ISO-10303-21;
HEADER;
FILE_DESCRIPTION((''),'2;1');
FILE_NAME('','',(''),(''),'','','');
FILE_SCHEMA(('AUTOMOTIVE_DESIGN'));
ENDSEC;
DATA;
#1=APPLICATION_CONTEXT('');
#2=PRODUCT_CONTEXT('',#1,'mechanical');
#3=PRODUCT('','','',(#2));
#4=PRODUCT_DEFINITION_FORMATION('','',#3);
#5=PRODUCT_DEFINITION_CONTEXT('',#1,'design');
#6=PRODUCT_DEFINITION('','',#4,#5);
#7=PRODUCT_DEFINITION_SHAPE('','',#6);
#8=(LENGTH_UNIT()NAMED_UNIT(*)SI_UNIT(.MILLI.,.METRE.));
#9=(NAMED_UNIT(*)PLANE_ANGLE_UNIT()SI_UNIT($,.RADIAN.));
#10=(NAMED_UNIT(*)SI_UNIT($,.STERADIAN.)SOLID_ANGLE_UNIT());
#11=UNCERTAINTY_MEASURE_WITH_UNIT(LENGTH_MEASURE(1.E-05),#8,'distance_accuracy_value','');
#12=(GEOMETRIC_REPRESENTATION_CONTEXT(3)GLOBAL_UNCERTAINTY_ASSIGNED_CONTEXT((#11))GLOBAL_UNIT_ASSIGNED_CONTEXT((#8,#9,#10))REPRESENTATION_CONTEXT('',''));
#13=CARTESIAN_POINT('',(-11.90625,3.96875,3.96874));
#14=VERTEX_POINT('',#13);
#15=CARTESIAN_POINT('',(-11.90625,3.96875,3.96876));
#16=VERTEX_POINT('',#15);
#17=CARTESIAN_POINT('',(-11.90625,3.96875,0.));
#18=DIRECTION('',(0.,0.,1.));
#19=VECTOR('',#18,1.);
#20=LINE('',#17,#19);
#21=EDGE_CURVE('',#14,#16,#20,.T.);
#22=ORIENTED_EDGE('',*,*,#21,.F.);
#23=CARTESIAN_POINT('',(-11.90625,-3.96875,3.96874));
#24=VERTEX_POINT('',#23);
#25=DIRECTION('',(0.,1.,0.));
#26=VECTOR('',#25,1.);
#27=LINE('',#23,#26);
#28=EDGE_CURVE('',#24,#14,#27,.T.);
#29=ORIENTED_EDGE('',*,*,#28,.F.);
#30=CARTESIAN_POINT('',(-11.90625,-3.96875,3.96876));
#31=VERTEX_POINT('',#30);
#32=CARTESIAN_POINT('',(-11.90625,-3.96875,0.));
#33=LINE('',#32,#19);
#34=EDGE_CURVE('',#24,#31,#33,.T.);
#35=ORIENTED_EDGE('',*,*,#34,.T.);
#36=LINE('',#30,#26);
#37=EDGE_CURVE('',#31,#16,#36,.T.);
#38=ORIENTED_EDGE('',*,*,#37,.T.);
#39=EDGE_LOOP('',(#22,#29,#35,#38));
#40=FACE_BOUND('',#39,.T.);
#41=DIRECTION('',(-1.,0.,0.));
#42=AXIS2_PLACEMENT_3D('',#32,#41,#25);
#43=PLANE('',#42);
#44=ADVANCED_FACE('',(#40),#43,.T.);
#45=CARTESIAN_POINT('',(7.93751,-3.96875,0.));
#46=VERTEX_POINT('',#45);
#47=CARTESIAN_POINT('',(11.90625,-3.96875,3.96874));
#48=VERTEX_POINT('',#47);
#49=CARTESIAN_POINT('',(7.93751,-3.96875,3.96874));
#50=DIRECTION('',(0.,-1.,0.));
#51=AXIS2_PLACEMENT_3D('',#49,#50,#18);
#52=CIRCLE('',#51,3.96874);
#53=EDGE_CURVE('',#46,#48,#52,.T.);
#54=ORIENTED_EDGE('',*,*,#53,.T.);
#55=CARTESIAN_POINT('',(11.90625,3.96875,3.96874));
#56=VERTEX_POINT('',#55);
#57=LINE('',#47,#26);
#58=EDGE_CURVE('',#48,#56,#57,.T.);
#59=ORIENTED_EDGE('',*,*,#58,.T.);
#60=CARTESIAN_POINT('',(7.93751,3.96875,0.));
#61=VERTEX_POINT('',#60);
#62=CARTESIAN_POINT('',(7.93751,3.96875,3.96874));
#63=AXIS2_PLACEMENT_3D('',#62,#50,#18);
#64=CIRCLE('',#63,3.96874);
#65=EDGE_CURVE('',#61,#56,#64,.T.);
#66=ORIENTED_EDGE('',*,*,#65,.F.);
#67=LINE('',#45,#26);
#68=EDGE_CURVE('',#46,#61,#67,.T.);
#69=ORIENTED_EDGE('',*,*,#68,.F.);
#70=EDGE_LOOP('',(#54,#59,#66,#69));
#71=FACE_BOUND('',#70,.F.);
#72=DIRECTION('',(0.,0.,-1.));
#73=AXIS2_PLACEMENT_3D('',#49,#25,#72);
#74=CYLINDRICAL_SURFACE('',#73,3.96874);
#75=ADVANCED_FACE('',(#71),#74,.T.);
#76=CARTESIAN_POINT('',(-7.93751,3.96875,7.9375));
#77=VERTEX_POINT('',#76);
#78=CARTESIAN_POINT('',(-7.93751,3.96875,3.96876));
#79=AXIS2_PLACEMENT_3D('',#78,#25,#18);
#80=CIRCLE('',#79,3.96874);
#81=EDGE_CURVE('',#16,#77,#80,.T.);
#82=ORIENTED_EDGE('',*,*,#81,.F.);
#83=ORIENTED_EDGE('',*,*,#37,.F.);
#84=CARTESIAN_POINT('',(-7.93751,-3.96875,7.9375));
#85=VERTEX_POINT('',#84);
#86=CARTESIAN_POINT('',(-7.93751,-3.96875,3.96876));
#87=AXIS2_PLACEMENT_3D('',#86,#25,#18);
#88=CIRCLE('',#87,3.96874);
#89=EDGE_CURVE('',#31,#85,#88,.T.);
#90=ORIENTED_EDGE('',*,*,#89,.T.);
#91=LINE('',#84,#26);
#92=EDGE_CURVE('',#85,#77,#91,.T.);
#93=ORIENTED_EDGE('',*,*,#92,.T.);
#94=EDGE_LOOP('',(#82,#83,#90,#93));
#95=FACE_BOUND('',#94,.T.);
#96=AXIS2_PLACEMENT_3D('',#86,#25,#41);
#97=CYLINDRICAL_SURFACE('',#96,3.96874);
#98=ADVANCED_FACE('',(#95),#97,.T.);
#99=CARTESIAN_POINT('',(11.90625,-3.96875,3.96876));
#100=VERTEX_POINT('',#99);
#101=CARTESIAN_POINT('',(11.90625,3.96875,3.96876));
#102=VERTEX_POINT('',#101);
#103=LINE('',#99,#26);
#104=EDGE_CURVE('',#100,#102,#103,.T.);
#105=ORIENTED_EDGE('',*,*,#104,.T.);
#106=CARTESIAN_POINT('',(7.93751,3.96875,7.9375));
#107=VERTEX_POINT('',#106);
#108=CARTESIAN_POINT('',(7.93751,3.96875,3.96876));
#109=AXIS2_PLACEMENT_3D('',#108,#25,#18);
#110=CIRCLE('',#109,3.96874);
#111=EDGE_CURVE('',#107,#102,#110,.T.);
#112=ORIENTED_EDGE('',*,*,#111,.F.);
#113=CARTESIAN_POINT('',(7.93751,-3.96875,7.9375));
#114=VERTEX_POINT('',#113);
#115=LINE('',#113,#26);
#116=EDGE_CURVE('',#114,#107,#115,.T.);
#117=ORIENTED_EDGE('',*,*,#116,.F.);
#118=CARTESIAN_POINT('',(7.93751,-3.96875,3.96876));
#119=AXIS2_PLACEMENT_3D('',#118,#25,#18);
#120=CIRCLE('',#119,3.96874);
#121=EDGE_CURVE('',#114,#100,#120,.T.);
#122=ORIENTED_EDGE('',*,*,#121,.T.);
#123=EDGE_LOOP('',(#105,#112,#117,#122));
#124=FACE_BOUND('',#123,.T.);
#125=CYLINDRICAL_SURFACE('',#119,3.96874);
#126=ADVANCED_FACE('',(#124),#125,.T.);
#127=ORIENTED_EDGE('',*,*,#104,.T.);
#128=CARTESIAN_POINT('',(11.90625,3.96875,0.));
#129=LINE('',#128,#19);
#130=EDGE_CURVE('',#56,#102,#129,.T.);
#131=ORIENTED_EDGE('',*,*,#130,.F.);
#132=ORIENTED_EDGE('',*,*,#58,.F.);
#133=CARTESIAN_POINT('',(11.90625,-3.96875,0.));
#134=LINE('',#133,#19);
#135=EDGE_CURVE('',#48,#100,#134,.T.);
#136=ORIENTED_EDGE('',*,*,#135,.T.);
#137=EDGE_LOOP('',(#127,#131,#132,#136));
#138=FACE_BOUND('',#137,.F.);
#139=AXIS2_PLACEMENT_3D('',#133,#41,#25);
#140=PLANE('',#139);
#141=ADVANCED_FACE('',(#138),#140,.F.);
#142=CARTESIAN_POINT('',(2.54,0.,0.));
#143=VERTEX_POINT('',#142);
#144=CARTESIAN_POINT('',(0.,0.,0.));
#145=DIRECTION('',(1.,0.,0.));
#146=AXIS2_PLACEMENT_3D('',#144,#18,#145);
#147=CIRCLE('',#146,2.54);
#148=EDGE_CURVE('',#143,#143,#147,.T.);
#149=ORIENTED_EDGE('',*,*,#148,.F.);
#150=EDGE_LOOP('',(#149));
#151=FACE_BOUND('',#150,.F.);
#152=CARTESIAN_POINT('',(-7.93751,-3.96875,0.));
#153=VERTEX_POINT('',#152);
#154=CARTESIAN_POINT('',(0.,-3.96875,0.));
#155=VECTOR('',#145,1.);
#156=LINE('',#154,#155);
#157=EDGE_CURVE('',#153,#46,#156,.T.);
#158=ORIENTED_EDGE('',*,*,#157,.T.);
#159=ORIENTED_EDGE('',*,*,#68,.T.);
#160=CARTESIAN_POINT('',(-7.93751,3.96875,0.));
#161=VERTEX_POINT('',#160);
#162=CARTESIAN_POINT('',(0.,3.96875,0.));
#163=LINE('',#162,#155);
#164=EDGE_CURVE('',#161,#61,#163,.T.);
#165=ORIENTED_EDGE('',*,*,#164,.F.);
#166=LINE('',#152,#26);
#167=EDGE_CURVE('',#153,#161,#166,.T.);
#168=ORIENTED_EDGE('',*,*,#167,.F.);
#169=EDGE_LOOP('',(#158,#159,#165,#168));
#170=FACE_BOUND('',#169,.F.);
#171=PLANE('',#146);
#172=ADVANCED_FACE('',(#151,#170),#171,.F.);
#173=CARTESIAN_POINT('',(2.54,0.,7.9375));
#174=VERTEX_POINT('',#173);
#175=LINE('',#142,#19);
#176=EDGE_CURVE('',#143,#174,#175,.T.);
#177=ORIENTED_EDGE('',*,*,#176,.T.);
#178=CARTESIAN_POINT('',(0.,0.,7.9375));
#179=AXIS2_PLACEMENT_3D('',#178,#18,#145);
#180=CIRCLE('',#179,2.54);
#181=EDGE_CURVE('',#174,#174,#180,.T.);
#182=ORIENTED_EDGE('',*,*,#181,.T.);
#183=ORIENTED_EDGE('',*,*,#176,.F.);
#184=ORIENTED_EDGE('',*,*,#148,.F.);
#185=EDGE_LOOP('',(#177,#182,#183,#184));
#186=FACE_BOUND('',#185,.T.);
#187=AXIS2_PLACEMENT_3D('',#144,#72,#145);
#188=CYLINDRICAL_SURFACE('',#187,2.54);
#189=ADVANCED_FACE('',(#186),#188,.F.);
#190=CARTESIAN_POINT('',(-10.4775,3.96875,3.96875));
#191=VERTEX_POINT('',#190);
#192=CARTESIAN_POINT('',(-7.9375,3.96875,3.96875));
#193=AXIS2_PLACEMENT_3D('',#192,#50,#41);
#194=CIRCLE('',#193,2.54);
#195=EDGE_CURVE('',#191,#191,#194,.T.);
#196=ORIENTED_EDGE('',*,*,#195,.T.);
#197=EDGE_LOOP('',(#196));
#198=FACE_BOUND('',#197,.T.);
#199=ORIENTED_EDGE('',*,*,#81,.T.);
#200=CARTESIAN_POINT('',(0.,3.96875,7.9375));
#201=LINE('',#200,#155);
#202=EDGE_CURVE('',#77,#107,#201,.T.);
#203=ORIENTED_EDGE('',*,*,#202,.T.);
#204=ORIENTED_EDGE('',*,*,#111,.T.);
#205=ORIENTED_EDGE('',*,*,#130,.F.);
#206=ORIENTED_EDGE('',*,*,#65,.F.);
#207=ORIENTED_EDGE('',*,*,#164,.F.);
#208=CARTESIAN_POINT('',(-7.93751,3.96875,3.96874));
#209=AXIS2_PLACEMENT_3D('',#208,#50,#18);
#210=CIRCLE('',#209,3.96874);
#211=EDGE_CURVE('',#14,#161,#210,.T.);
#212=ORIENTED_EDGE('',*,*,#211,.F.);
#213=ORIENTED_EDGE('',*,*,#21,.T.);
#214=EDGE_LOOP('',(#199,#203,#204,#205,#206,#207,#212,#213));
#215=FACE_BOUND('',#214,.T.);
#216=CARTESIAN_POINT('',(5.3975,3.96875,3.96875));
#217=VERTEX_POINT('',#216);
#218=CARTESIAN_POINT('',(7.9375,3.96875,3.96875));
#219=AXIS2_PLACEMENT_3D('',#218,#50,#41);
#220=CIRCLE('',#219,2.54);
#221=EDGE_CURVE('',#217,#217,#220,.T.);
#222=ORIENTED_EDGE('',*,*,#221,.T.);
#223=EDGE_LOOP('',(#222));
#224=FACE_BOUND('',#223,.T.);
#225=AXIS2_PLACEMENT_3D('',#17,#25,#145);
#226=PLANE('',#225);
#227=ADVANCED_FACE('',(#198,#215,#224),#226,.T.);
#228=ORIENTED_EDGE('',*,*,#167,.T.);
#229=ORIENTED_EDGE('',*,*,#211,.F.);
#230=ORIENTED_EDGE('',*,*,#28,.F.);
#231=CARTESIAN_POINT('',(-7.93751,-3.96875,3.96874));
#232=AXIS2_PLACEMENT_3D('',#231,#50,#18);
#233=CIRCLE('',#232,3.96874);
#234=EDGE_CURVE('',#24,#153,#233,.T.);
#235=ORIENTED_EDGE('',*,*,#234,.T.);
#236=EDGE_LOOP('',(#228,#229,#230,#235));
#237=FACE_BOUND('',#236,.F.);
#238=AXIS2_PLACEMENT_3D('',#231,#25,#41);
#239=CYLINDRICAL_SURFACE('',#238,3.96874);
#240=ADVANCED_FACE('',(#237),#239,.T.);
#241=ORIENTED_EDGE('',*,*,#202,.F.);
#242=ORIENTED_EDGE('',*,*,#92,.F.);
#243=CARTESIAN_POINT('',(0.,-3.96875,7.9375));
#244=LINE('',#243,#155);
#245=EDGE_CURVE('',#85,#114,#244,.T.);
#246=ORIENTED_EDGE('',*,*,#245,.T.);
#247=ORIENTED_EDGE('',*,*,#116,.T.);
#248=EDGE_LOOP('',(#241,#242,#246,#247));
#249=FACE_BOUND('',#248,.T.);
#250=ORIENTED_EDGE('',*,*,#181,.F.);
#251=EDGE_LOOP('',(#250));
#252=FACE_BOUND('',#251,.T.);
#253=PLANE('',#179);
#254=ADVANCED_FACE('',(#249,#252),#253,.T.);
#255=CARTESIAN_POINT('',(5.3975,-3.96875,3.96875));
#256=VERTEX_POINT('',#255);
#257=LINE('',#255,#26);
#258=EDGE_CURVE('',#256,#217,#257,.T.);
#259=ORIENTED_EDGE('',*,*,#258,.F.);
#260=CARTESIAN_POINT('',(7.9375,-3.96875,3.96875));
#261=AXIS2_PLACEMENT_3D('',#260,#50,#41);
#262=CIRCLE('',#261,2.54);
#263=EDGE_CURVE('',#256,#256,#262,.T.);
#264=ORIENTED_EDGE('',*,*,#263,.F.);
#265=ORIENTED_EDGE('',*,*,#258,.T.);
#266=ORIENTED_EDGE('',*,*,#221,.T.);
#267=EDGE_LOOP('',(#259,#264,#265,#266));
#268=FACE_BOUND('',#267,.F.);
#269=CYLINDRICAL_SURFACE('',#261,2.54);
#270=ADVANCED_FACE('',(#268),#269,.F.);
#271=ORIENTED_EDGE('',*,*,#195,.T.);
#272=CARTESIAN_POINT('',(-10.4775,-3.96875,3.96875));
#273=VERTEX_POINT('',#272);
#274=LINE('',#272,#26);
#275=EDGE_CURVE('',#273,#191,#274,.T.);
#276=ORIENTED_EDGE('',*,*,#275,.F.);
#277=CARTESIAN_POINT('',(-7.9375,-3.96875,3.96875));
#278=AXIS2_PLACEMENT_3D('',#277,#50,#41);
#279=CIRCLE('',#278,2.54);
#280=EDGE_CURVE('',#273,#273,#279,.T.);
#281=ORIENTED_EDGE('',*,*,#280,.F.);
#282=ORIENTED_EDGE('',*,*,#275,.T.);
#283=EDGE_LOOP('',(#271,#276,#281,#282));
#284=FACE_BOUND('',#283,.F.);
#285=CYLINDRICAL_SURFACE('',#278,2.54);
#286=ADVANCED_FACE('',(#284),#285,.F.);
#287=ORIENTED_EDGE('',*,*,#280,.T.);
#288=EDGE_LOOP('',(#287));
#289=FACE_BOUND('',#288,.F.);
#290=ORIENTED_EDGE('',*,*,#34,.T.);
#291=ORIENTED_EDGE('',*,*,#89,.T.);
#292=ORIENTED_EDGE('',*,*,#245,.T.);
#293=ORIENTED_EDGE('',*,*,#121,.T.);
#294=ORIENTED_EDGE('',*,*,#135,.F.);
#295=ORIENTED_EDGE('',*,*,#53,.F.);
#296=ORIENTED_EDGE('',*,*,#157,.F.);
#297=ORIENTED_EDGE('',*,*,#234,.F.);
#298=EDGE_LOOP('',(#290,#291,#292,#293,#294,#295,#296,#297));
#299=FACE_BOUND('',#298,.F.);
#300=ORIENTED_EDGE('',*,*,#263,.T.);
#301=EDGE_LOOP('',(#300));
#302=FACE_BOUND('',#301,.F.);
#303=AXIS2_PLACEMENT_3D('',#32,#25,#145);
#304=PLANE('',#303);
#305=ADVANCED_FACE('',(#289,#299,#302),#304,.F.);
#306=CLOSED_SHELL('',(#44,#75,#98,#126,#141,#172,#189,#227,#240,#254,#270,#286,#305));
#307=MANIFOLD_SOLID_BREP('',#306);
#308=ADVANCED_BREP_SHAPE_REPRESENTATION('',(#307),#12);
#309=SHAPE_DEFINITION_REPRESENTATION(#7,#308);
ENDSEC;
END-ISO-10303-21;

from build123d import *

# Parameters (mm, degrees)
F0_W     = 23.8125
F0_H     = 7.9375
F0_R     = 2.54
F1_DEPTH = 7.9375
F3_DEPTH = 7.9375
F4_R     = 3.96874


# Not quite as in the source:
# - a fillet or chamfer is up to 0.001 mm smaller than in the source, because OpenCascade refuses the exact size


with BuildPart() as f1:
    # F0 (on Top) → F1 (new body)
    with BuildSketch(Plane.XY):
        Rectangle(F0_W, F0_H)
        Circle(F0_R, mode=Mode.SUBTRACT)
    extrude(amount=F1_DEPTH)

    # F2 (on face) → F3 (cut, through all)
    with BuildSketch(Plane.XZ.offset(3.96875)):
        with BuildLine():
            ThreePointArc((-5.3975, 3.96875), (-7.9375, 6.50875), (-10.4775, 3.96875))
            Line((-10.4775, 3.96875), (-7.9375, 3.96875))
            Line((-7.9375, 3.96875), (-5.3975, 3.96875))
        make_face()
        with BuildLine():
            ThreePointArc((10.4775, 3.96875), (7.9375, 6.50875), (5.3975, 3.96875))
            Line((5.3975, 3.96875), (7.9375, 3.96875))
            Line((7.9375, 3.96875), (10.4775, 3.96875))
        make_face()
        with BuildLine():
            Line((7.9375, 3.96875), (5.3975, 3.96875))
            ThreePointArc((5.3975, 3.96875), (7.9375, 1.42875), (10.4775, 3.96875))
            Line((10.4775, 3.96875), (7.9375, 3.96875))
        make_face()
        with BuildLine():
            Line((-7.9375, 3.96875), (-10.4775, 3.96875))
            ThreePointArc((-10.4775, 3.96875), (-7.9375, 1.42875), (-5.3975, 3.96875))
            Line((-5.3975, 3.96875), (-7.9375, 3.96875))
        make_face()
    extrude(amount=-F3_DEPTH, mode=Mode.SUBTRACT)

    # F4 (radius 3.96875 in the source; OpenCascade refuses exactly that, so slightly less here)
    f4_edges = [f1.edges().sort_by_distance(p)[0] for p in [
        (11.90625, 0, 7.9375),
        (11.90625, 0, 0),
        (-11.90625, 0, 7.9375),
        (-11.90625, 0, 0),
    ]]
    fillet(f4_edges, radius=F4_R)


solid = f1.part
